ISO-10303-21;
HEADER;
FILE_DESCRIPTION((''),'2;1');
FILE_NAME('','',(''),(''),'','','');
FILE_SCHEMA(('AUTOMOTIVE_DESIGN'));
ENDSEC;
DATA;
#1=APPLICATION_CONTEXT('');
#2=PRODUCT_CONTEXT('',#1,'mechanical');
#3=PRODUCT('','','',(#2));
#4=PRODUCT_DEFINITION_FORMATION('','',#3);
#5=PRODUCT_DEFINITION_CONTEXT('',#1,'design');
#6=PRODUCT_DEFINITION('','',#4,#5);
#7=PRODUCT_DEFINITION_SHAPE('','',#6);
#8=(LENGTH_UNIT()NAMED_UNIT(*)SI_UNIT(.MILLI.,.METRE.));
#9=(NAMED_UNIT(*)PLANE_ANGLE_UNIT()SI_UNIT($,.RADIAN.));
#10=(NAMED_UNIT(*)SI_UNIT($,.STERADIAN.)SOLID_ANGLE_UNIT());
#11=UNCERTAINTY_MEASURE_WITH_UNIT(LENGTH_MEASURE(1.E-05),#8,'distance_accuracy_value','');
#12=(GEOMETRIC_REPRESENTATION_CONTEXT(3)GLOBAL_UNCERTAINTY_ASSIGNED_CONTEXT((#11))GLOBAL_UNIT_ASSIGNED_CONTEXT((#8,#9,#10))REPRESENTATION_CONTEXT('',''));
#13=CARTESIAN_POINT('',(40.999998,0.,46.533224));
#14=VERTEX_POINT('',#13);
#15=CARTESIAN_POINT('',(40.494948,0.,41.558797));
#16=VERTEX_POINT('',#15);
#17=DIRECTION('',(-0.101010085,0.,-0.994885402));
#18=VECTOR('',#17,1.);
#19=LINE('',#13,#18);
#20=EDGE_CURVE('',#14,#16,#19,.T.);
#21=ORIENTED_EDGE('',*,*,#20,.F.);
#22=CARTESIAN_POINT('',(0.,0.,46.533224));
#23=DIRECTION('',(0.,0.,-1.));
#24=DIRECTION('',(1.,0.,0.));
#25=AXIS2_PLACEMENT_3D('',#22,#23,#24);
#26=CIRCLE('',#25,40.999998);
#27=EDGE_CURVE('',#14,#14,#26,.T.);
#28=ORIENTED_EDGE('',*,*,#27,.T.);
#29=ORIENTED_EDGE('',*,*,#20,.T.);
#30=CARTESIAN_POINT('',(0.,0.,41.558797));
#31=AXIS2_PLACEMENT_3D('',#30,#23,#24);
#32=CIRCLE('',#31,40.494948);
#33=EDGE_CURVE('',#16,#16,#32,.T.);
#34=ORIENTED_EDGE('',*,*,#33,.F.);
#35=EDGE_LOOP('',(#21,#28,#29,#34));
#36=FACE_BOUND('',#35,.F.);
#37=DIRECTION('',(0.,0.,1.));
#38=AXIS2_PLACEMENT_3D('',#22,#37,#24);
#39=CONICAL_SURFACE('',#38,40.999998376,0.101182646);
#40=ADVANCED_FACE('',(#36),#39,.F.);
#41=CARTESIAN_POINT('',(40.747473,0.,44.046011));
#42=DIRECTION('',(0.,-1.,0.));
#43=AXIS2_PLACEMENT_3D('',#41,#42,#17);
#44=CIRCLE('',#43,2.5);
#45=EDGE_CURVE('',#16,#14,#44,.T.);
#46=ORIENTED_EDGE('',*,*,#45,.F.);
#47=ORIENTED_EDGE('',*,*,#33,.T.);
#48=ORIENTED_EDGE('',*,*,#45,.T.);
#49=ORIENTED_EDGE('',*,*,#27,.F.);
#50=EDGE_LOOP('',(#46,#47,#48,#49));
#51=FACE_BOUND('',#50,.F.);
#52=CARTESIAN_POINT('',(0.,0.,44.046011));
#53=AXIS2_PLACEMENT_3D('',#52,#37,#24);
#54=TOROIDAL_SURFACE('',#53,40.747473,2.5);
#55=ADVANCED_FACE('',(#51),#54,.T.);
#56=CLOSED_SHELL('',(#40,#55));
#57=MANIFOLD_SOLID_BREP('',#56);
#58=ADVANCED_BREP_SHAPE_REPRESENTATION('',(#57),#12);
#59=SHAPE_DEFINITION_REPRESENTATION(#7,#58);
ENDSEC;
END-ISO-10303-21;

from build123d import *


# Not quite as in the source:
# - the program builds the solid bodies; features that only make, move or delete a surface that nothing else refers to are left out


with BuildPart() as f3:
    # F0 (on Front) → F3 (revolve)
    with BuildSketch(Plane.XZ):
        with BuildLine():
            Line((40.9999983762, 46.5332240357), (40.4949479532, 41.5587970265))
            ThreePointArc((40.4949479532, 41.5587970265), (43.2346866693, 43.7934853196), (40.9999983762, 46.5332240357))
        make_face()
    revolve(axis=Axis((0, 0, 5.4605058394), (0, 0, -1)))


solid = f3.part
